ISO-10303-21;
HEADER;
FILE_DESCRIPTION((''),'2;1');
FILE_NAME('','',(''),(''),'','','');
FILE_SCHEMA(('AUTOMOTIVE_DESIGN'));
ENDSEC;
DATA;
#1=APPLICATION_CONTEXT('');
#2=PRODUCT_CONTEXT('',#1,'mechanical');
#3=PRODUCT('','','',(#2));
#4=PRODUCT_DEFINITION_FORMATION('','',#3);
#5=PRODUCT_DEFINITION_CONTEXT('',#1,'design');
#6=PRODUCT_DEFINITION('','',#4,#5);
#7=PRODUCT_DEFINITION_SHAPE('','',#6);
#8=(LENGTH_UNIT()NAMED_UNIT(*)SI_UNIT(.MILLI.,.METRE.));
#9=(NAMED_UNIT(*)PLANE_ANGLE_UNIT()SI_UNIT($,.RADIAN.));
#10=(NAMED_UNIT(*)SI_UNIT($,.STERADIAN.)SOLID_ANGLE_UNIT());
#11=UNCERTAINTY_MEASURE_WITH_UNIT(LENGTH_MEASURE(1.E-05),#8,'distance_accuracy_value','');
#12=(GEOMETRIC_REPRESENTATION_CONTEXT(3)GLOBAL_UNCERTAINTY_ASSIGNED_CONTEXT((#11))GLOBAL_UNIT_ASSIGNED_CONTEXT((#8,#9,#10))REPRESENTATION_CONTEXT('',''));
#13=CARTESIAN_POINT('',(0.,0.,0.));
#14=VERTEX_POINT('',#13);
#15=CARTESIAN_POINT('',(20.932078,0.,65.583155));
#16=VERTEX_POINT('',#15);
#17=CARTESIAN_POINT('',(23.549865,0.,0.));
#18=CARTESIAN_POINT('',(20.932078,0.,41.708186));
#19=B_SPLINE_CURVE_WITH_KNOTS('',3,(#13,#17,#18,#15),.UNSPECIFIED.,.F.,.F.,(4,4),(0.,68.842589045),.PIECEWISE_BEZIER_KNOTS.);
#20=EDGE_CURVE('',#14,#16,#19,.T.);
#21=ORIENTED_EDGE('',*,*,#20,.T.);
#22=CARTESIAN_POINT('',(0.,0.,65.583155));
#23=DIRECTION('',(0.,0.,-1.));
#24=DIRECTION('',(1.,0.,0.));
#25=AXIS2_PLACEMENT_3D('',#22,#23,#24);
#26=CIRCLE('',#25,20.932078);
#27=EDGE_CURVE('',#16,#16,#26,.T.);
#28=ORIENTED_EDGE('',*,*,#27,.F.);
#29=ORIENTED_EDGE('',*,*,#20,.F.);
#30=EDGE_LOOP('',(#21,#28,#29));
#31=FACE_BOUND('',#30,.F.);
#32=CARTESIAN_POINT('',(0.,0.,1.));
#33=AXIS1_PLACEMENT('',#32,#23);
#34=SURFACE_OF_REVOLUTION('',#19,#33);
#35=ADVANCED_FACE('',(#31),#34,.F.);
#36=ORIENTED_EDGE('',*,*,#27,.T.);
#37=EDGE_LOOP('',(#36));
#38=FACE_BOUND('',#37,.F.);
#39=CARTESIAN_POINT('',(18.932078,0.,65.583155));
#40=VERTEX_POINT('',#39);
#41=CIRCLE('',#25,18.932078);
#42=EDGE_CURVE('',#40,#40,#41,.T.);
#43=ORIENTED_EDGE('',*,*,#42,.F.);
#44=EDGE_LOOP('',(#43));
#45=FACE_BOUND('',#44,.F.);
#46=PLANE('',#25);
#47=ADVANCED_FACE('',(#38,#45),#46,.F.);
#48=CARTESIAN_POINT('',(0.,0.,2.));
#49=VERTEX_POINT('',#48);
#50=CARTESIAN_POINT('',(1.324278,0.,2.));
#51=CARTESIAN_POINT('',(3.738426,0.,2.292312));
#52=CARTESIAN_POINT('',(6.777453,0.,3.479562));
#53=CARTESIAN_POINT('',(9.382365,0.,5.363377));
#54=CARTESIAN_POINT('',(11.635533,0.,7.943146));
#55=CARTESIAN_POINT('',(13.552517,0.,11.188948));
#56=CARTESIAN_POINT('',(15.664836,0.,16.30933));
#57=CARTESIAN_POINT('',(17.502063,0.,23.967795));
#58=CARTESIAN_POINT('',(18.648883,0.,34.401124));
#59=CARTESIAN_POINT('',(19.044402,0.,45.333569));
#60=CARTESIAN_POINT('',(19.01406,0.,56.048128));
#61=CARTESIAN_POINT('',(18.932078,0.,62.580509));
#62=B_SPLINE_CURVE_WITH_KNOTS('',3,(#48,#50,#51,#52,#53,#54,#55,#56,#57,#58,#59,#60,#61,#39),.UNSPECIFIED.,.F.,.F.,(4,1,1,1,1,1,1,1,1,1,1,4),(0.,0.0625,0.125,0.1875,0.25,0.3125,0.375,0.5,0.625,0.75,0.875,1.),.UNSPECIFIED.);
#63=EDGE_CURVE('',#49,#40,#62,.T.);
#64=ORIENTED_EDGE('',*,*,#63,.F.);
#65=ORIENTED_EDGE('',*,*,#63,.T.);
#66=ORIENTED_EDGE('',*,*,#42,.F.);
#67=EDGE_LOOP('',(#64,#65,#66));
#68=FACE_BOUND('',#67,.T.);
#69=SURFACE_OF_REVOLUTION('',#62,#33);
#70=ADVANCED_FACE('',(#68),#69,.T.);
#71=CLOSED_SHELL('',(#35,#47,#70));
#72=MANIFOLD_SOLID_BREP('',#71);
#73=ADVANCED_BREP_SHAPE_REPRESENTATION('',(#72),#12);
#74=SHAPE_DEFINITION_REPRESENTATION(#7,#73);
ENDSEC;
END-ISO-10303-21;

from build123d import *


# Not quite as in the source:
# - the dataset's text gives a spline's control points without its knots; the knots are read off the source's solid


with BuildPart() as f1:
    # F0 (on Front) → F1 (revolve)
    with BuildSketch(Plane.XZ):
        with BuildLine():
            Line((0, 2), (0, 0))
            add(Edge.make_bspline(
                [(0, 0), (23.5498647262, 0), (20.9320783615, 41.7081862688), (20.9320783615, 65.5831545591)],
                knots=[0, 0, 0, 0, 68.8425890453, 68.8425890453, 68.8425890453, 68.8425890453], degree=3))
            Line((20.9320783615, 65.5831545591), (18.9320783615, 65.5831545591))
            add(Edge.make_bspline(
                [(0, 2), (1.3242783435, 2), (3.7384264007, 2.2923115555), (6.7774530121, 3.4795618758), (9.3823646779, 5.3633768045), (11.6355334339, 7.9431458318), (13.5525171646, 11.1889476515), (15.6648362966, 16.3093300516), (17.5020628605, 23.9677952847), (18.6488827554, 34.4011235836), (19.0444021256, 45.3335690122), (19.014059508, 56.0481279708), (18.9320783615, 62.5805092482), (18.9320783615, 65.5831545591)],
                knots=[0, 0, 0, 0, 0.0625, 0.125, 0.1875, 0.25, 0.3125, 0.375, 0.5, 0.625, 0.75, 0.875, 1, 1, 1, 1], degree=3))
        make_face()
    revolve(axis=Axis((0, 0, 1), (0, 0, -1)))


solid = f1.part
